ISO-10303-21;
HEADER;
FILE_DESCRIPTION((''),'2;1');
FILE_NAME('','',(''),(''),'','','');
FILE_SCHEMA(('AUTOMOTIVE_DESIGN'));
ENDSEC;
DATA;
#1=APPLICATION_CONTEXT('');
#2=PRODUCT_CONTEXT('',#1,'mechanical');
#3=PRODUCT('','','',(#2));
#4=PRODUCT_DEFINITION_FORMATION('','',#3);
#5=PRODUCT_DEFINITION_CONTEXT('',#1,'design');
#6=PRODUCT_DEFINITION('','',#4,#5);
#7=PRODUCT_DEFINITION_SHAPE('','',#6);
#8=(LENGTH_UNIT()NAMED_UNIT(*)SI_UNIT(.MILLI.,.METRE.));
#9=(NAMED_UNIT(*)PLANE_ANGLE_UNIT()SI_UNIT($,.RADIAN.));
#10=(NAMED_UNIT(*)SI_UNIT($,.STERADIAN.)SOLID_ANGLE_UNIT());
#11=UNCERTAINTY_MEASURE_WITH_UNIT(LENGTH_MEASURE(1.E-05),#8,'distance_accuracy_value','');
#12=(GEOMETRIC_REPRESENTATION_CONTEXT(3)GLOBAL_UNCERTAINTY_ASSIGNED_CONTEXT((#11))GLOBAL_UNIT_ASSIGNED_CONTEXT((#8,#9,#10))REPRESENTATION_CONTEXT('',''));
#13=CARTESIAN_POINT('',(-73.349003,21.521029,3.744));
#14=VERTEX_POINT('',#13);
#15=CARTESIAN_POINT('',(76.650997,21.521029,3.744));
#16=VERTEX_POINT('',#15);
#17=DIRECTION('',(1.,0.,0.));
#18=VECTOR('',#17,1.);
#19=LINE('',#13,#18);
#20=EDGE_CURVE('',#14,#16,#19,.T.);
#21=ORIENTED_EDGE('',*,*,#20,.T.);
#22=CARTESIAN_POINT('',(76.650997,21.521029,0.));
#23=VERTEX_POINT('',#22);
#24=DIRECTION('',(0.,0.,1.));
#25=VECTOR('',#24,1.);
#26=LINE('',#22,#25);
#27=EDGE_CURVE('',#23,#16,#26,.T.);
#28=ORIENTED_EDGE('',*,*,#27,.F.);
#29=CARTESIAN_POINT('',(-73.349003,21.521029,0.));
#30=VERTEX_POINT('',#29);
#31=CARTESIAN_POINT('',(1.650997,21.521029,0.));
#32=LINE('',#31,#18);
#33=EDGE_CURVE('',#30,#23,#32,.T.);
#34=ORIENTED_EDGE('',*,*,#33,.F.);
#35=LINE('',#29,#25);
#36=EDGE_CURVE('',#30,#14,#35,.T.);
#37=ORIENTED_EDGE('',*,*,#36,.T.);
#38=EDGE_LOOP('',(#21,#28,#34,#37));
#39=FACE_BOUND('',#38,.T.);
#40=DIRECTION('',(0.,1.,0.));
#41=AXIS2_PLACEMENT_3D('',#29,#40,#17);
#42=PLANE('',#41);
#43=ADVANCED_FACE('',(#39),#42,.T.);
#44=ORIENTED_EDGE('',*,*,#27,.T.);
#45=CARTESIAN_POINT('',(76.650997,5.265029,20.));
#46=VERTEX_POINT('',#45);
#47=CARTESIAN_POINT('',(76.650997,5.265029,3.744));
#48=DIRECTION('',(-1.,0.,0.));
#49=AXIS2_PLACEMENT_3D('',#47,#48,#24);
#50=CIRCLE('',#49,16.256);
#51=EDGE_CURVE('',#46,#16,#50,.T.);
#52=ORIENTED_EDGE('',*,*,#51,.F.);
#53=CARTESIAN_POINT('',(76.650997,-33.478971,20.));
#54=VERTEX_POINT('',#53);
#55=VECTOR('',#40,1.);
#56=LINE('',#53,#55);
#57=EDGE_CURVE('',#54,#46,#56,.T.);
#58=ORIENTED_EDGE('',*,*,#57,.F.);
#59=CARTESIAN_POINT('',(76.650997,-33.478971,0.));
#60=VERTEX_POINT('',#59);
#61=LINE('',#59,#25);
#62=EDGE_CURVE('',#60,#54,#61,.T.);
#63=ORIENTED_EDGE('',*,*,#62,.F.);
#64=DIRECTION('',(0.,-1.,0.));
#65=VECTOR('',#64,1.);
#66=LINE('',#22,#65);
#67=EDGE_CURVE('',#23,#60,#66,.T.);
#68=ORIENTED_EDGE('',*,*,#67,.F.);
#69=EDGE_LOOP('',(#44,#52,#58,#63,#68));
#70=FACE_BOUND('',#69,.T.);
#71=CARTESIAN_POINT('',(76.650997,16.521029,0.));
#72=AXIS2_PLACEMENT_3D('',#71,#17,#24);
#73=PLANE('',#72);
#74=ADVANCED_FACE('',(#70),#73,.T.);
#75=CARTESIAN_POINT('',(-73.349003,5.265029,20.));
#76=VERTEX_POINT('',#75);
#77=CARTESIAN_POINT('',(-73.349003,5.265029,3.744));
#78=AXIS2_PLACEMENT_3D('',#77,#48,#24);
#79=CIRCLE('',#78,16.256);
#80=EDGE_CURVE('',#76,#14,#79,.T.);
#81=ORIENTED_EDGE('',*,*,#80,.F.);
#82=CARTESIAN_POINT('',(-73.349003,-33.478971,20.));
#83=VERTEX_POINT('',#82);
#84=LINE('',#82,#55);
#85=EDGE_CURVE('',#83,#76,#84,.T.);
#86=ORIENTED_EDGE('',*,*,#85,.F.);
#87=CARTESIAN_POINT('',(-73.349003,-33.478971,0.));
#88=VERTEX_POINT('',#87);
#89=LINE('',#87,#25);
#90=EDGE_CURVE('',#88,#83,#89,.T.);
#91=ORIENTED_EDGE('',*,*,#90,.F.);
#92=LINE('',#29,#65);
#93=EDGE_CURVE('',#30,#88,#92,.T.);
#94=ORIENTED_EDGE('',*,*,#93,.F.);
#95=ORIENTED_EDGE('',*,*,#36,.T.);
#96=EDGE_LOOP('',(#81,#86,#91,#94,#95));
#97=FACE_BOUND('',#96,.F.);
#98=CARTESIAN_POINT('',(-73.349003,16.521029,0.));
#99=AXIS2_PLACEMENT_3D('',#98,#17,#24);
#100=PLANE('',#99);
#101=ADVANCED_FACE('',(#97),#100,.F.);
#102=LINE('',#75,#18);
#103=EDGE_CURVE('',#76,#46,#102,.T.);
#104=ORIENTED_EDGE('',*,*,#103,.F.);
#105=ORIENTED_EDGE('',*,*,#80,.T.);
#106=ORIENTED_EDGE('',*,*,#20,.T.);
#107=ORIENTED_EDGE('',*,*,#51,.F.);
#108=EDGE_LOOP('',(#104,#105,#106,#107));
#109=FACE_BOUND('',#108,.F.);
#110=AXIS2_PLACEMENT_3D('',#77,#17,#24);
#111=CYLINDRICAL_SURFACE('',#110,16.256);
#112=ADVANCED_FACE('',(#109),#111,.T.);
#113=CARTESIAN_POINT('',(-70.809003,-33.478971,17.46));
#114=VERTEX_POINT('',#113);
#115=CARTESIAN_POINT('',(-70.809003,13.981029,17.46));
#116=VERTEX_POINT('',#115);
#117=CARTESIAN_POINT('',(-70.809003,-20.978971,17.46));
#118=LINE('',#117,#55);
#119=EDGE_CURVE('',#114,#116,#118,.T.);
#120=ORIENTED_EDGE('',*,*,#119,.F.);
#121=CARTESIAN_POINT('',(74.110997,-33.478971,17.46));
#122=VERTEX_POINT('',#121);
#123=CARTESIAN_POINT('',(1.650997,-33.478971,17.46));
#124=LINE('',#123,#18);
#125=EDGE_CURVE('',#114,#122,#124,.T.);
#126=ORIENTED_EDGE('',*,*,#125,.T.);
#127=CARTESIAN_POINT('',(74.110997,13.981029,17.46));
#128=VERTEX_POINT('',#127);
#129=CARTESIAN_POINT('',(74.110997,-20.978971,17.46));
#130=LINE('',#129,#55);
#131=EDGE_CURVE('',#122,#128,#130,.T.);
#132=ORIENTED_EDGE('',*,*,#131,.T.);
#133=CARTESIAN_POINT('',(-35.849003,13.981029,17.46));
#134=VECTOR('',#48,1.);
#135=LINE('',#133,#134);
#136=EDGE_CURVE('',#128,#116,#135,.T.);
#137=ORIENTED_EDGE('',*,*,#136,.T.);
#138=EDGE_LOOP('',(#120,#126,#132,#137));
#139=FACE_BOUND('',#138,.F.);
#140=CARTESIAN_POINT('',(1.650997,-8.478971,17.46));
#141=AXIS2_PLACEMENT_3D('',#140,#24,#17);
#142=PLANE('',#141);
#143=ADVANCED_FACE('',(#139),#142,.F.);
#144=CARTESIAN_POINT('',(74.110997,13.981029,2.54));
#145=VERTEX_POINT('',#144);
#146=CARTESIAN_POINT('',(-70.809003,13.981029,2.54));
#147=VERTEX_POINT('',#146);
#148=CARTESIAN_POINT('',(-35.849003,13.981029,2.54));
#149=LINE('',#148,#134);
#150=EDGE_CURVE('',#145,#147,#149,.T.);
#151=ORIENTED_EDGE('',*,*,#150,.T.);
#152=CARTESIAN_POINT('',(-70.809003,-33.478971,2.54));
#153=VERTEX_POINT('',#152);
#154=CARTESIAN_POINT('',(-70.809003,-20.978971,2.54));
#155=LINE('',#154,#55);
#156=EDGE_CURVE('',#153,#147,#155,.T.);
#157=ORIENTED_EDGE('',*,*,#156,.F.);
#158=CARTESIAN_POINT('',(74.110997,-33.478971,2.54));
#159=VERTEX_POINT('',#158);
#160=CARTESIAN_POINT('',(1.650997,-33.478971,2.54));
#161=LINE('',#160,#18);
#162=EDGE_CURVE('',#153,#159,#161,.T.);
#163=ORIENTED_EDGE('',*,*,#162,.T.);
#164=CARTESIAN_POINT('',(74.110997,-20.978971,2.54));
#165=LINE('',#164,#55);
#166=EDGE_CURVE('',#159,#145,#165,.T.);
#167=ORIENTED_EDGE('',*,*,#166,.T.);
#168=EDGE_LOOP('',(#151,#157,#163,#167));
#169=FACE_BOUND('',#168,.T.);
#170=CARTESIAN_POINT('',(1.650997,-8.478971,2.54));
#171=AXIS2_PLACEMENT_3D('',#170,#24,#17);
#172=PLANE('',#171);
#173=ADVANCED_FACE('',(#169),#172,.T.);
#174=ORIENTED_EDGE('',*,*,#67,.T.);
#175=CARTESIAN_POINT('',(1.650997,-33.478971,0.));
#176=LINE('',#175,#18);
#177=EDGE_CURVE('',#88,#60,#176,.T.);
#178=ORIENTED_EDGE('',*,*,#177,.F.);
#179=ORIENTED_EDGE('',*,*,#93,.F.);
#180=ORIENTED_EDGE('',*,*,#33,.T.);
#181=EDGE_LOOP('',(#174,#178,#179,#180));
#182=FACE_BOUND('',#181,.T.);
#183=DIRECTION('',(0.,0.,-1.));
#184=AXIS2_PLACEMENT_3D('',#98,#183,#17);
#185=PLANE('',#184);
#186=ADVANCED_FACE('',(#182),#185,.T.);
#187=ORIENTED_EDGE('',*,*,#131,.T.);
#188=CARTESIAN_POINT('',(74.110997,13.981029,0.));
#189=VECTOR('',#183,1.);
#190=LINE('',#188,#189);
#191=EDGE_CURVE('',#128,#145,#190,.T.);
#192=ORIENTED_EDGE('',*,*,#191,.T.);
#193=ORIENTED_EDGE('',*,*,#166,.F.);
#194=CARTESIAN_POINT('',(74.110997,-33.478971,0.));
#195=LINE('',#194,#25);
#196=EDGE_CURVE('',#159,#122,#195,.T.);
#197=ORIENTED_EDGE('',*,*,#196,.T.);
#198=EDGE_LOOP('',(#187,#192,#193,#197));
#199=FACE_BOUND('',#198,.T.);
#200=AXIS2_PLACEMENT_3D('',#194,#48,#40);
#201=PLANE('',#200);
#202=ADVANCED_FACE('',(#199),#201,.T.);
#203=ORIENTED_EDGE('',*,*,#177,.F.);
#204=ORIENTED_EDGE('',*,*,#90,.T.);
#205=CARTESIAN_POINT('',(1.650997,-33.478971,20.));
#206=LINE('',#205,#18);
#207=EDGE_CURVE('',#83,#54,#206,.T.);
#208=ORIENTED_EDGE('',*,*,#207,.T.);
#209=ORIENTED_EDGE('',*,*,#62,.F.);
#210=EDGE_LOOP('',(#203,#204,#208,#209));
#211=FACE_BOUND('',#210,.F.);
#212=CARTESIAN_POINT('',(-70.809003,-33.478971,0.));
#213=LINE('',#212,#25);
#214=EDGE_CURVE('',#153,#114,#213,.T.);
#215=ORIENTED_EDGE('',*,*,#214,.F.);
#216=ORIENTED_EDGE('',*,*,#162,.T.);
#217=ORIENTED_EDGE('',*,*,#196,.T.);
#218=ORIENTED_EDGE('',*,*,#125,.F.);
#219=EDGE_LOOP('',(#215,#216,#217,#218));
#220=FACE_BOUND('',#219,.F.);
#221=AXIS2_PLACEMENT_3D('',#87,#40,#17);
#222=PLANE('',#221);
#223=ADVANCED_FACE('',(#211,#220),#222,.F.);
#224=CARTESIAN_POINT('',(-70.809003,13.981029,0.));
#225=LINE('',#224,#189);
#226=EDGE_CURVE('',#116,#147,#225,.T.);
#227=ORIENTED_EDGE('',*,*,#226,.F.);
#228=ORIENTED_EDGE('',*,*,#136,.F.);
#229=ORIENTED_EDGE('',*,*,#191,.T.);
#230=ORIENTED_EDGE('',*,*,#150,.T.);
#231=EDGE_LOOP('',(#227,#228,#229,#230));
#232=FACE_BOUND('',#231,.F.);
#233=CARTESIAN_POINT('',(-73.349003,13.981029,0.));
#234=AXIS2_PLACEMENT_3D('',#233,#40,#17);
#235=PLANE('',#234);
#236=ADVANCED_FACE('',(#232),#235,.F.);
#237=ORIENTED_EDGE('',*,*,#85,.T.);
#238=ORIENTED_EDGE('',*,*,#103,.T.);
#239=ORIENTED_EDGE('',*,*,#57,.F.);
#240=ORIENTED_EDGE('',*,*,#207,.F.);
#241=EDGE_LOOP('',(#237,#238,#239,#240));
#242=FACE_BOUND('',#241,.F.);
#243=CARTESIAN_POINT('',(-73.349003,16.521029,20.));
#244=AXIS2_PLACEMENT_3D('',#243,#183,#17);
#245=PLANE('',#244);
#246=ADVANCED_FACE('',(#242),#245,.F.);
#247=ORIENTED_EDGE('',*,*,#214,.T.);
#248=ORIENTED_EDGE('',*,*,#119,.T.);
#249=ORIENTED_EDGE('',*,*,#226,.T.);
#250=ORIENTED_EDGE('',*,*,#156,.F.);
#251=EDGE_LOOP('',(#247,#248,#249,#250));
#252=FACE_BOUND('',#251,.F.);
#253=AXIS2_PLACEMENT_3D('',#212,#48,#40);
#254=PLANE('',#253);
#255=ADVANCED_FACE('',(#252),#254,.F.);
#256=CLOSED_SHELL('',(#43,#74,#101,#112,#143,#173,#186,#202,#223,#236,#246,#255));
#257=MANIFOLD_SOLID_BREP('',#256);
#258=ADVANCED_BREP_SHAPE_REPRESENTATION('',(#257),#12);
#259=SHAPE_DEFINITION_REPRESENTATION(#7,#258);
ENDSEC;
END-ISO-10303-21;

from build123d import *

# Parameters (mm, degrees)
F0_W     = 150
F0_H     = 50
F1_DEPTH = 20
F2_T     = -2.54
F3_DEPTH = 5
F4_R     = 16.256


with BuildPart() as f1:
    # F0 (on Top) → F1 (new body)
    with BuildSketch(Plane.XY):
        with Locations((1.6509965062, -8.4789711357)):
            Rectangle(F0_W, F0_H)
    extrude(amount=F1_DEPTH)

    # F2
    f2_openings = [f1.faces().sort_by_distance(p)[0] for p in [
        (1.650997, -33.478971, 10),
    ]]
    offset(amount=F2_T, openings=f2_openings)

    # F3 (add): a face of the model
    f3_faces = [f1.faces().sort_by_distance(p)[0] for p in [
        (1.6509965062, 16.5210288643, 10),
    ]]
    extrude(f3_faces, amount=F3_DEPTH)

    # F4
    f4_edges = [f1.edges().sort_by_distance(p)[0] for p in [
        (1.650997, 21.521029, 20),
    ]]
    fillet(f4_edges, radius=F4_R)


solid = f1.part
